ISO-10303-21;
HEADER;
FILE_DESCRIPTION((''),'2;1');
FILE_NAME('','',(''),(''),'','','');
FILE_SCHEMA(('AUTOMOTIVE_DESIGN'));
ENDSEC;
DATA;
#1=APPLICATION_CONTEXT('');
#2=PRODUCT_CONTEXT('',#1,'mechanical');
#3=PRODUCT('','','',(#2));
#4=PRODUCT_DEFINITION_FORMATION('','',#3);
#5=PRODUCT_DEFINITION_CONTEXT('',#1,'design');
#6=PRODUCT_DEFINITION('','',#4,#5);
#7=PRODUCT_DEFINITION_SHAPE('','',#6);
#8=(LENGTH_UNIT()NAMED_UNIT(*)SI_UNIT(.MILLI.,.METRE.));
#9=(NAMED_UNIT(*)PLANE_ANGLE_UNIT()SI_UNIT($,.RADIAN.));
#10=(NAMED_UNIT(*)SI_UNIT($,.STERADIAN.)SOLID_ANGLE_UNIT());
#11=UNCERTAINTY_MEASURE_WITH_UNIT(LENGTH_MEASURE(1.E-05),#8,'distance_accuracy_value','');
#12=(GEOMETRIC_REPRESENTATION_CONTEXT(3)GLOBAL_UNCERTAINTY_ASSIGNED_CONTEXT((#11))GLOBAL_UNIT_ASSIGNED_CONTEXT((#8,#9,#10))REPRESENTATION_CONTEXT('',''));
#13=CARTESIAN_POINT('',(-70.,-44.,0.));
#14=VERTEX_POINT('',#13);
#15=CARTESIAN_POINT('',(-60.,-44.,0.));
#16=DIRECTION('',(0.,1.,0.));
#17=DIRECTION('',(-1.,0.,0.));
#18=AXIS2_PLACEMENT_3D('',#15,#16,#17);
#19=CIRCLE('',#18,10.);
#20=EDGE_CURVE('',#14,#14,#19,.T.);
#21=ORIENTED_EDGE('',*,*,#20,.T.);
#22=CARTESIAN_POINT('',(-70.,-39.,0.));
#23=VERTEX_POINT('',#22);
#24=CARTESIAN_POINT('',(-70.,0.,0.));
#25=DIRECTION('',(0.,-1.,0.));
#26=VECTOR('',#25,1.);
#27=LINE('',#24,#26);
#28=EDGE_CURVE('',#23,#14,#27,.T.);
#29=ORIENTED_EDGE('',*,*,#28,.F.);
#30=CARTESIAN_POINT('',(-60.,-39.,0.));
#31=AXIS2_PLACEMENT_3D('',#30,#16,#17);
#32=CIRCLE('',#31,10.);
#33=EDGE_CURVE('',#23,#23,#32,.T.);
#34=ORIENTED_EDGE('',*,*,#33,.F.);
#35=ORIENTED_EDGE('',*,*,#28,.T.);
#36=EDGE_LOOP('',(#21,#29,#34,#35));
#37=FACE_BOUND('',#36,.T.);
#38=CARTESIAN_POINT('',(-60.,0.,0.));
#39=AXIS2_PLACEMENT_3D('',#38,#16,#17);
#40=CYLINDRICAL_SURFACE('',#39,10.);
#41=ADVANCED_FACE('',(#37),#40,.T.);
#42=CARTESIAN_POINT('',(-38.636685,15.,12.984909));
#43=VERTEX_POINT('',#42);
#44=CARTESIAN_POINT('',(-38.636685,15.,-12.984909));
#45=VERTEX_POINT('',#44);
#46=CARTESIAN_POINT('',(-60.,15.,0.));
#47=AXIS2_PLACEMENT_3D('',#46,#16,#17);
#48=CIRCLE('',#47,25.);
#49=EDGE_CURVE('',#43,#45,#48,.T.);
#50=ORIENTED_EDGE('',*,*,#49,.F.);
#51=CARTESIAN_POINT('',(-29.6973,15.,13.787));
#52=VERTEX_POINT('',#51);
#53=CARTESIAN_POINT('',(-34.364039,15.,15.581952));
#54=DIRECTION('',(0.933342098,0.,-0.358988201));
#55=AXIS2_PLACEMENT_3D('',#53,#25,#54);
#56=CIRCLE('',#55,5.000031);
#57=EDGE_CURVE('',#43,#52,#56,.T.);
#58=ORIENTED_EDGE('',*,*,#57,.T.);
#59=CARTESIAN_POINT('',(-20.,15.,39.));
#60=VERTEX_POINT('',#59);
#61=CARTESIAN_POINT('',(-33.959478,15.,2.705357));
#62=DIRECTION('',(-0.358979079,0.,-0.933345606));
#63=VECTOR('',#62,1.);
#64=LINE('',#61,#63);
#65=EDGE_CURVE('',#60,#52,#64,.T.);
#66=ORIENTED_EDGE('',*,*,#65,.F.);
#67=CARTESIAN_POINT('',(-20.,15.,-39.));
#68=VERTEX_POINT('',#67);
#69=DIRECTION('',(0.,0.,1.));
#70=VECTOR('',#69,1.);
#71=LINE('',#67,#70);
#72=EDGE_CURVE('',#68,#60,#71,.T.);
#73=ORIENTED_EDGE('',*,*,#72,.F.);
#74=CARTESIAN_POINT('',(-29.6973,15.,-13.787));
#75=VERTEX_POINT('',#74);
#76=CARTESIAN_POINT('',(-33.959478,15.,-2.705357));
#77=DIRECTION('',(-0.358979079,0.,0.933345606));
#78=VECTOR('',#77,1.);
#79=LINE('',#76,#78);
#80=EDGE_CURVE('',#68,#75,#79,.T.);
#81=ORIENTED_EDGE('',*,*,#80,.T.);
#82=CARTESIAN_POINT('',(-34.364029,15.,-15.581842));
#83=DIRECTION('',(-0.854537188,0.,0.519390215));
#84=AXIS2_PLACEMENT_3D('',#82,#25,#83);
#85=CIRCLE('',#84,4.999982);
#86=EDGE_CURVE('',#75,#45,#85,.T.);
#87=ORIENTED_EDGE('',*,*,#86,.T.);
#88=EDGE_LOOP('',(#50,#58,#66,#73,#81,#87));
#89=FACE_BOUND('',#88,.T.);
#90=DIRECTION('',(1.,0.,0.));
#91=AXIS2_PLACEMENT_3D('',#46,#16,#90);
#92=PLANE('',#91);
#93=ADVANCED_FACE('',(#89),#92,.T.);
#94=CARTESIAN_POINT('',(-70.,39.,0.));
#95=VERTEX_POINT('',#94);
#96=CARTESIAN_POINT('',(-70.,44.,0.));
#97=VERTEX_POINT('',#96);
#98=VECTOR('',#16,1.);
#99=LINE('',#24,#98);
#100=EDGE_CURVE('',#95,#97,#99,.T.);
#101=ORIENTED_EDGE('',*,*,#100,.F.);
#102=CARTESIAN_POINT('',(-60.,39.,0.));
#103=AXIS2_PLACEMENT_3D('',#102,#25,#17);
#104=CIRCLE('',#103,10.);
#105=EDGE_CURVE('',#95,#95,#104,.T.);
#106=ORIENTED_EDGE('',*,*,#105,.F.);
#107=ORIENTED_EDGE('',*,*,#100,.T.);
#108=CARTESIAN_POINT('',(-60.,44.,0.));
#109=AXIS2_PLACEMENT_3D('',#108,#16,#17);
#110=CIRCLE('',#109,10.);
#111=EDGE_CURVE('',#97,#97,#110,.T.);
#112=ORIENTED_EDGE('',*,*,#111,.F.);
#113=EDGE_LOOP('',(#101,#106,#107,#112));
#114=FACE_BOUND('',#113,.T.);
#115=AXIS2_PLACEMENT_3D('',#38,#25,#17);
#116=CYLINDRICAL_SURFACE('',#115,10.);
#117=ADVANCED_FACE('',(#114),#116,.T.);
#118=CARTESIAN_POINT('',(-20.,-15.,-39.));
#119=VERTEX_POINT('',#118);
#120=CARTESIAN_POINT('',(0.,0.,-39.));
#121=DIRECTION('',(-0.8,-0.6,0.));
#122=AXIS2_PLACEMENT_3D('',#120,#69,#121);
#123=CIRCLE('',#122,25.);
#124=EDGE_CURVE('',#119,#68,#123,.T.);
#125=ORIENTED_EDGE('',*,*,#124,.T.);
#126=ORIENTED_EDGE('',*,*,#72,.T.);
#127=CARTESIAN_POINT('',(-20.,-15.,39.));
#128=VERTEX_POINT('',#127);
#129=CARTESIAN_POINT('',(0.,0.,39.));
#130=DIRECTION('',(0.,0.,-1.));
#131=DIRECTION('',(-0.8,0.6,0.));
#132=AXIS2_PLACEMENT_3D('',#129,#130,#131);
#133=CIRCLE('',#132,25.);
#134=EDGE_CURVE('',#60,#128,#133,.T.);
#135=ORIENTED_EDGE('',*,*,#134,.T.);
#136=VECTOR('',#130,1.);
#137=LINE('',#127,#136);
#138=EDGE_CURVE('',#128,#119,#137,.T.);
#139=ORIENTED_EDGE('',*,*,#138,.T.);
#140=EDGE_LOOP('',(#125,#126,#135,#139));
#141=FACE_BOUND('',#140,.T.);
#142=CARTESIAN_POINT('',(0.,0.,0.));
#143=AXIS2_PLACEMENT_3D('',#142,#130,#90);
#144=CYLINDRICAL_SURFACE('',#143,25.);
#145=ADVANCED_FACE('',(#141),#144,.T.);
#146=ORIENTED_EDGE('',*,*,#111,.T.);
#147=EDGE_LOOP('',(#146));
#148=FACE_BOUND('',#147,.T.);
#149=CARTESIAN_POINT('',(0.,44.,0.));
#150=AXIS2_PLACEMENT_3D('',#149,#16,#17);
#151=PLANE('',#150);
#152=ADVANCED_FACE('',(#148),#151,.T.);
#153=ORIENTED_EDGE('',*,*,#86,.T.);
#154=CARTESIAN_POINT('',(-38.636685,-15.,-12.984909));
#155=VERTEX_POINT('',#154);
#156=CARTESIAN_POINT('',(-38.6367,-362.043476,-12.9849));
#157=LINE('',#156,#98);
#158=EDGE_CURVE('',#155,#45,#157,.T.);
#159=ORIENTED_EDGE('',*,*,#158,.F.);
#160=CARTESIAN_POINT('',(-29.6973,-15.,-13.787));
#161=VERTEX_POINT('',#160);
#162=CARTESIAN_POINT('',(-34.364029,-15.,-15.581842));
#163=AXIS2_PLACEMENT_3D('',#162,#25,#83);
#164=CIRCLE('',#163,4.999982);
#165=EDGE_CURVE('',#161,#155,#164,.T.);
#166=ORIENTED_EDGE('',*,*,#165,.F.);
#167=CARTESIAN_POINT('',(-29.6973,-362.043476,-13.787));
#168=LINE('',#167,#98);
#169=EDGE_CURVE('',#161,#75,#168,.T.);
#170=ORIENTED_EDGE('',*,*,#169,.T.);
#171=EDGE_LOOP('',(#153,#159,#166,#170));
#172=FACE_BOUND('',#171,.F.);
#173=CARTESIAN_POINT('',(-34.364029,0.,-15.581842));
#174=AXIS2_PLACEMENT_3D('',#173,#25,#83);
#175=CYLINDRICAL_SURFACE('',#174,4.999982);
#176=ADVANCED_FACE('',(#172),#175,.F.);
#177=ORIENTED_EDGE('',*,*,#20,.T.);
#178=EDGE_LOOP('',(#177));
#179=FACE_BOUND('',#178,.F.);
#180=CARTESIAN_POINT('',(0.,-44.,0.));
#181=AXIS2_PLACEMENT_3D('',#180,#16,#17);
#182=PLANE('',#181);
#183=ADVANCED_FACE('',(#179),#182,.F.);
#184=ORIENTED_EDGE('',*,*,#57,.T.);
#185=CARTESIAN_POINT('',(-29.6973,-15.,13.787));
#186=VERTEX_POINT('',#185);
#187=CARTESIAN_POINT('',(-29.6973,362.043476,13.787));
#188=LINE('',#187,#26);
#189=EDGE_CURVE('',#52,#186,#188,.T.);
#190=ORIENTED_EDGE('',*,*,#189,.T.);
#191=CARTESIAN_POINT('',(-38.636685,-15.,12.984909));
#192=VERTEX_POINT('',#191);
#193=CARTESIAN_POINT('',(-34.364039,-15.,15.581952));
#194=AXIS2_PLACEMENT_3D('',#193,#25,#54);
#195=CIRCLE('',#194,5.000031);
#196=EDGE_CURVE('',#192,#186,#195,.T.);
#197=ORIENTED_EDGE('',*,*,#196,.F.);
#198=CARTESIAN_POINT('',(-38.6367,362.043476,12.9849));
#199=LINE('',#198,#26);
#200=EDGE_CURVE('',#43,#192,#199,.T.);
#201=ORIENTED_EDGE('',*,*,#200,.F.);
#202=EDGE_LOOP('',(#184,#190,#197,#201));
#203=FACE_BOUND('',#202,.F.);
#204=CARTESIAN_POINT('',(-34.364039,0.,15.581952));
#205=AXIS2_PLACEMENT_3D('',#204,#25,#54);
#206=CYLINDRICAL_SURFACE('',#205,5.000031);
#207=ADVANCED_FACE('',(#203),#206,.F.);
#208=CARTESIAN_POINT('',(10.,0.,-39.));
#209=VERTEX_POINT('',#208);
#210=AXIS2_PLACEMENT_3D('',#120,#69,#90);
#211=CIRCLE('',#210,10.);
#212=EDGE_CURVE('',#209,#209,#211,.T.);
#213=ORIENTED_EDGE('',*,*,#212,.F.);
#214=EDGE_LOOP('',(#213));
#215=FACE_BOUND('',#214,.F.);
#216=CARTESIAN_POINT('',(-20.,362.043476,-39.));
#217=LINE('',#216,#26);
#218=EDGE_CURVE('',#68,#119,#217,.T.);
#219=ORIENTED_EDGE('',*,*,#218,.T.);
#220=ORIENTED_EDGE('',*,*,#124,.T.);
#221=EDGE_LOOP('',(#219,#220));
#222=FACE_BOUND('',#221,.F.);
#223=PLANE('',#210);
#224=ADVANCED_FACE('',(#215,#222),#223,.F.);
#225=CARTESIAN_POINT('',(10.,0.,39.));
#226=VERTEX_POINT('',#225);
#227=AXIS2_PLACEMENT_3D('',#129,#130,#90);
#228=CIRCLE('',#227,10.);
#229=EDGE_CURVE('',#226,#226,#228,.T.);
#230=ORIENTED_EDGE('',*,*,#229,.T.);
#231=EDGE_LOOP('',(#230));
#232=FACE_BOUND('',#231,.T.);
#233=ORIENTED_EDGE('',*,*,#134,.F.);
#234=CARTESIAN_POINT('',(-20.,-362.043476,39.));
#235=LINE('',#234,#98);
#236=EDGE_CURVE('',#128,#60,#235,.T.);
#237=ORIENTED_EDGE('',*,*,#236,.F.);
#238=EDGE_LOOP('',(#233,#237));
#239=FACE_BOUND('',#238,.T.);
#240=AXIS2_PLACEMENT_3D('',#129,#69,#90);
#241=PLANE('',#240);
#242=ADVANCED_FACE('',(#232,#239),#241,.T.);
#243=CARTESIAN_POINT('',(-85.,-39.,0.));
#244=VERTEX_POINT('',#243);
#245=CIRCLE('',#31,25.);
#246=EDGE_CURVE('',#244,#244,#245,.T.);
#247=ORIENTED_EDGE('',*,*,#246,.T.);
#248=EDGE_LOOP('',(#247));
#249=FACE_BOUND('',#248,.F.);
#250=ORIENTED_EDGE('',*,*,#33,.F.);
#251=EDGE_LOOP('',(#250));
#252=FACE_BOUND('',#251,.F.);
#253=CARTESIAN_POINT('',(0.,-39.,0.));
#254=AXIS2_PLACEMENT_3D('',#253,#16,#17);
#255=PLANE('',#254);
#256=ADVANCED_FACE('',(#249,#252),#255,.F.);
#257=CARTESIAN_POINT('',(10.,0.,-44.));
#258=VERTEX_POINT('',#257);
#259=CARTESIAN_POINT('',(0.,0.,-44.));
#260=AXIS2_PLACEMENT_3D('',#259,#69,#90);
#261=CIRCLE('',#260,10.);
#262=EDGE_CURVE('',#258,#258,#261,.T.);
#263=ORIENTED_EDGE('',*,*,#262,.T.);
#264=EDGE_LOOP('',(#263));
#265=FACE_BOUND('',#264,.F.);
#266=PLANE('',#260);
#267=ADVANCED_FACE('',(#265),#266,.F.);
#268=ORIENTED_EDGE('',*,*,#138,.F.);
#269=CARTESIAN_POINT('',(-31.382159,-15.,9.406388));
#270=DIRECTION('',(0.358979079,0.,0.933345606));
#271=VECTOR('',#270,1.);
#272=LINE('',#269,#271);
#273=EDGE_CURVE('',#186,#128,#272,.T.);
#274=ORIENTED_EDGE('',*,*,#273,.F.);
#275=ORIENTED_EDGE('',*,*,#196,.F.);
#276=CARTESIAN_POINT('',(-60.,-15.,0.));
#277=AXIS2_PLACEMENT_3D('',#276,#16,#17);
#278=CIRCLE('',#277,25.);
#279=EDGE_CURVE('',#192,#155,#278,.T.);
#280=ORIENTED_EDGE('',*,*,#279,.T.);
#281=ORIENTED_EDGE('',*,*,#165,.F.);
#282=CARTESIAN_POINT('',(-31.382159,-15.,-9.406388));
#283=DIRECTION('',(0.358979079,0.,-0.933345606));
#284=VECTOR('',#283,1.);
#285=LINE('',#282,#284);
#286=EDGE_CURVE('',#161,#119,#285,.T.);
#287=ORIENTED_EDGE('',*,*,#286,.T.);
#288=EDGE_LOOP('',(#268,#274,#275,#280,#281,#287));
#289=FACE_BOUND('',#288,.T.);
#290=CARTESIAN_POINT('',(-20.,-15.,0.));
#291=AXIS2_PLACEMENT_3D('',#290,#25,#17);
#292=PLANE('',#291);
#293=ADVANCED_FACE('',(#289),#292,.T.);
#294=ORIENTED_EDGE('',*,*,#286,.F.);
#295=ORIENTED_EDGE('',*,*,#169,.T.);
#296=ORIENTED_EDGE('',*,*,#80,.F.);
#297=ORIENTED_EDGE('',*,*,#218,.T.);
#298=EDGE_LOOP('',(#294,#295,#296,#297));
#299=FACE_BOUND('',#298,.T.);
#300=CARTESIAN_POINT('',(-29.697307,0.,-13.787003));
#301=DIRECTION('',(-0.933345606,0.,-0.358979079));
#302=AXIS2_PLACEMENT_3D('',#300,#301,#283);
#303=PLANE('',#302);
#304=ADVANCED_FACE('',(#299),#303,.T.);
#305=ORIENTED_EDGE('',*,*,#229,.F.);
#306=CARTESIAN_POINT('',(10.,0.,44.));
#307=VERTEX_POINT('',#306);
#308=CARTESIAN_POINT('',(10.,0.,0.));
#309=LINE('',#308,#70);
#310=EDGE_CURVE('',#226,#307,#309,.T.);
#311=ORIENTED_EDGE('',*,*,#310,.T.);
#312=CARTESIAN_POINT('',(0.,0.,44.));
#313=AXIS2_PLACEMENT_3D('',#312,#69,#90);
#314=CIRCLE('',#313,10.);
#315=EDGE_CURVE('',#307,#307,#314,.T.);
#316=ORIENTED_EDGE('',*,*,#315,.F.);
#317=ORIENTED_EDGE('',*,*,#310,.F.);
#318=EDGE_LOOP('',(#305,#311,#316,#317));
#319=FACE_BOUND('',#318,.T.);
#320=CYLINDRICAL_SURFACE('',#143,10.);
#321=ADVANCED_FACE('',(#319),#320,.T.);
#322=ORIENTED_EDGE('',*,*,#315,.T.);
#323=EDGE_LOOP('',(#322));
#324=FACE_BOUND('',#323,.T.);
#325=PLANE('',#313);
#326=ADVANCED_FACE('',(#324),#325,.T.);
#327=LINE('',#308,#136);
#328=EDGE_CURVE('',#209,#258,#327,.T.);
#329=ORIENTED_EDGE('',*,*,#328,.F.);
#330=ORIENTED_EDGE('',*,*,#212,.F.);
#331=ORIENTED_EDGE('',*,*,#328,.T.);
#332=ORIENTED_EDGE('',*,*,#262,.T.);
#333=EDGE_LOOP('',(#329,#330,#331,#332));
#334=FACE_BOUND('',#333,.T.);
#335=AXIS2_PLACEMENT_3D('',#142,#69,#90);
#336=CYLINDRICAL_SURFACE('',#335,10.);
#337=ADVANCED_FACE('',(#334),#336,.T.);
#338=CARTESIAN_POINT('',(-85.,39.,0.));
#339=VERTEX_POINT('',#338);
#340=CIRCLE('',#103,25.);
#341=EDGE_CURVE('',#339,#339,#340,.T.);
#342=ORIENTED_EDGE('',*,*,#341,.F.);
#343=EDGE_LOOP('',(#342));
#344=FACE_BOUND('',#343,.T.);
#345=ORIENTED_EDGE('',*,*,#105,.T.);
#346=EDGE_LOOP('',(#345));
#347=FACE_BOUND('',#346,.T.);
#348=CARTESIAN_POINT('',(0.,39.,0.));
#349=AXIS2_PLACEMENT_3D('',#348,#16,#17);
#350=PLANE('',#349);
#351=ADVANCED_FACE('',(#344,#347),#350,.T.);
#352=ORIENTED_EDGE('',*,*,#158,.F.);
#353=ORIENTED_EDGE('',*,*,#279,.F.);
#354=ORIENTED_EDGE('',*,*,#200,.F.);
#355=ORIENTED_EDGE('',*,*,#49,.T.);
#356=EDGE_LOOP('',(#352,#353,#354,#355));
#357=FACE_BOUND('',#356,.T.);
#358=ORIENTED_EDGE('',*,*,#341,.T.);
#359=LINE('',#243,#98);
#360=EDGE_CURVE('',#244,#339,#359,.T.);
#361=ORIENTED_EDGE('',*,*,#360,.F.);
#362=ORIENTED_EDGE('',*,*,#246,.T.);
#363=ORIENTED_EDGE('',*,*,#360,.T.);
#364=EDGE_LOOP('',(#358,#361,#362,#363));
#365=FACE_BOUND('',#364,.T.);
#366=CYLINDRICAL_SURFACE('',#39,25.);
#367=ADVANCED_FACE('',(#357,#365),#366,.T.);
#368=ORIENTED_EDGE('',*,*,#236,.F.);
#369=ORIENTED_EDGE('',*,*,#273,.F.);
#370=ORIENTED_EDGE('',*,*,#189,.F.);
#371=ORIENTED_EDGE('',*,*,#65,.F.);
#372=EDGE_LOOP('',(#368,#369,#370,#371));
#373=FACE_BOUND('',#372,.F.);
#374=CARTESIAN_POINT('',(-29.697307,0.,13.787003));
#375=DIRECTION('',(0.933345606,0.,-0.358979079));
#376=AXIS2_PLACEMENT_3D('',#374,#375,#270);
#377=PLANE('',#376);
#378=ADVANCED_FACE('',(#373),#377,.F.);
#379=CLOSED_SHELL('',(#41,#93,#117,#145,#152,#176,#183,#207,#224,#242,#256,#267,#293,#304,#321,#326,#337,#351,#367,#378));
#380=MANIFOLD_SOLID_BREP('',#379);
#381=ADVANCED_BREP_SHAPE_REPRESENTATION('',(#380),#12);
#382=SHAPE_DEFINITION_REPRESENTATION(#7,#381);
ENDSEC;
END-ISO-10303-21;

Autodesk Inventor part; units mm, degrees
ref_plane "YZ Plane" through (0, 0, 0) normal (1, 0, 0) x (0, 1, 0)
ref_plane "XZ Plane" through (0, 0, 0) normal (0, 1, 0) x (-1, 0, 0)
ref_plane "XY Plane" through (0, 0, 0) normal (0, 0, 1) x (1, 0, 0)
sketch "Sketch1" plane through (0, 0, 0) normal (0, 0, 1) x (1, 0, 0)
  circle A0 centre (0, 0) radius 25
  circle A1 centre (0, 0) radius 10
  line L0 (-60, 15) -> (-20, 15)
  line L1 (-20, 15) -> (-20, -15)
  line L2 (-20, -15) -> (-60, -15)
  line L3 (-60, -15) -> (-60, 15)
  point P0 (-40, -15)
  point P1 (-20, -15)
  dimension "d0" = 50
  dimension "d1" = 20
  dimension "d2" = 30
  dimension "d3" = 15
  dimension "d4" = 40
extrude "Extrusion1" add sketch "Sketch1" along normal mid plane 78 contours A0 L1 | L1 A0 | A0 L2 L3 L0 | A1
sketch "Sketch2" plane through (0, 0, 0) normal (0, 0, 1) x (1, 0, 0)
  circle A0 centre (0, 0) radius 10
  dimension "d7" = 20
extrude "Extrusion2" add sketch "Sketch2" along normal mid plane 88
sketch "Sketch3" plane through (0, 0, 0) normal (0, 1, 0) x (-1, 0, 0)
  circle A0 centre (60, 0) radius 25
  line L0 (20, -39) -> (20, 39) construction
  line L1 (60, 39) -> (60, -39) projected
  line L2 (-25, -39) -> (20, -39) projected
  line L3 (20, 39) -> (-25, 39) projected
  line L4 (0, 0) -> (60, 0) construction
  line L5 (35, 0) -> (20, -39)
  line L6 (35, 0) -> (20, 39)
  arc A1 (38.6367, -12.9849) -> (29.6973, -13.787) centre (34.364, -15.5819) ccw
  arc A2 (29.6973, 13.787) -> (38.6367, 12.9849) centre (34.364, 15.5819) ccw
  line L7 (60, 39) -> (20, 39) projected
  line L8 (60, 25) -> (60, 39)
  line L9 (60, -39) -> (60, -25)
  line L10 (20, -39) -> (20, 39) projected
  line L11 (20, -39) -> (60, -39)
  dimension "d10" = 50
  dimension "d11" = 60
  dimension "d14" = 10
  dimension "d15" = 10
extrude "Extrusion3" add sketch "Sketch3" along normal mid plane 78 contours A0 L1 | L1 A0
extrude "Extrusion4" cut sketch "Sketch3" along normal through all both and the other way through all contours A0 A2 L6 L7 L1 | L1 L11 L5 A1 A0
sketch "Sketch4" plane through (0, 0, 0) normal (0, 1, 0) x (-1, 0, 0)
  circle A0 centre (60, 0) radius 25 projected
  circle A1 centre (60, 0) radius 10
  point P0 (0, 0)
  dimension "d20" = 20
extrude "Extrusion5" add sketch "Sketch4" along normal mid plane 88 contours A1
equation "\"d3\" = 0.5 * d2"
properties part number "Arm 4 v0.1"
